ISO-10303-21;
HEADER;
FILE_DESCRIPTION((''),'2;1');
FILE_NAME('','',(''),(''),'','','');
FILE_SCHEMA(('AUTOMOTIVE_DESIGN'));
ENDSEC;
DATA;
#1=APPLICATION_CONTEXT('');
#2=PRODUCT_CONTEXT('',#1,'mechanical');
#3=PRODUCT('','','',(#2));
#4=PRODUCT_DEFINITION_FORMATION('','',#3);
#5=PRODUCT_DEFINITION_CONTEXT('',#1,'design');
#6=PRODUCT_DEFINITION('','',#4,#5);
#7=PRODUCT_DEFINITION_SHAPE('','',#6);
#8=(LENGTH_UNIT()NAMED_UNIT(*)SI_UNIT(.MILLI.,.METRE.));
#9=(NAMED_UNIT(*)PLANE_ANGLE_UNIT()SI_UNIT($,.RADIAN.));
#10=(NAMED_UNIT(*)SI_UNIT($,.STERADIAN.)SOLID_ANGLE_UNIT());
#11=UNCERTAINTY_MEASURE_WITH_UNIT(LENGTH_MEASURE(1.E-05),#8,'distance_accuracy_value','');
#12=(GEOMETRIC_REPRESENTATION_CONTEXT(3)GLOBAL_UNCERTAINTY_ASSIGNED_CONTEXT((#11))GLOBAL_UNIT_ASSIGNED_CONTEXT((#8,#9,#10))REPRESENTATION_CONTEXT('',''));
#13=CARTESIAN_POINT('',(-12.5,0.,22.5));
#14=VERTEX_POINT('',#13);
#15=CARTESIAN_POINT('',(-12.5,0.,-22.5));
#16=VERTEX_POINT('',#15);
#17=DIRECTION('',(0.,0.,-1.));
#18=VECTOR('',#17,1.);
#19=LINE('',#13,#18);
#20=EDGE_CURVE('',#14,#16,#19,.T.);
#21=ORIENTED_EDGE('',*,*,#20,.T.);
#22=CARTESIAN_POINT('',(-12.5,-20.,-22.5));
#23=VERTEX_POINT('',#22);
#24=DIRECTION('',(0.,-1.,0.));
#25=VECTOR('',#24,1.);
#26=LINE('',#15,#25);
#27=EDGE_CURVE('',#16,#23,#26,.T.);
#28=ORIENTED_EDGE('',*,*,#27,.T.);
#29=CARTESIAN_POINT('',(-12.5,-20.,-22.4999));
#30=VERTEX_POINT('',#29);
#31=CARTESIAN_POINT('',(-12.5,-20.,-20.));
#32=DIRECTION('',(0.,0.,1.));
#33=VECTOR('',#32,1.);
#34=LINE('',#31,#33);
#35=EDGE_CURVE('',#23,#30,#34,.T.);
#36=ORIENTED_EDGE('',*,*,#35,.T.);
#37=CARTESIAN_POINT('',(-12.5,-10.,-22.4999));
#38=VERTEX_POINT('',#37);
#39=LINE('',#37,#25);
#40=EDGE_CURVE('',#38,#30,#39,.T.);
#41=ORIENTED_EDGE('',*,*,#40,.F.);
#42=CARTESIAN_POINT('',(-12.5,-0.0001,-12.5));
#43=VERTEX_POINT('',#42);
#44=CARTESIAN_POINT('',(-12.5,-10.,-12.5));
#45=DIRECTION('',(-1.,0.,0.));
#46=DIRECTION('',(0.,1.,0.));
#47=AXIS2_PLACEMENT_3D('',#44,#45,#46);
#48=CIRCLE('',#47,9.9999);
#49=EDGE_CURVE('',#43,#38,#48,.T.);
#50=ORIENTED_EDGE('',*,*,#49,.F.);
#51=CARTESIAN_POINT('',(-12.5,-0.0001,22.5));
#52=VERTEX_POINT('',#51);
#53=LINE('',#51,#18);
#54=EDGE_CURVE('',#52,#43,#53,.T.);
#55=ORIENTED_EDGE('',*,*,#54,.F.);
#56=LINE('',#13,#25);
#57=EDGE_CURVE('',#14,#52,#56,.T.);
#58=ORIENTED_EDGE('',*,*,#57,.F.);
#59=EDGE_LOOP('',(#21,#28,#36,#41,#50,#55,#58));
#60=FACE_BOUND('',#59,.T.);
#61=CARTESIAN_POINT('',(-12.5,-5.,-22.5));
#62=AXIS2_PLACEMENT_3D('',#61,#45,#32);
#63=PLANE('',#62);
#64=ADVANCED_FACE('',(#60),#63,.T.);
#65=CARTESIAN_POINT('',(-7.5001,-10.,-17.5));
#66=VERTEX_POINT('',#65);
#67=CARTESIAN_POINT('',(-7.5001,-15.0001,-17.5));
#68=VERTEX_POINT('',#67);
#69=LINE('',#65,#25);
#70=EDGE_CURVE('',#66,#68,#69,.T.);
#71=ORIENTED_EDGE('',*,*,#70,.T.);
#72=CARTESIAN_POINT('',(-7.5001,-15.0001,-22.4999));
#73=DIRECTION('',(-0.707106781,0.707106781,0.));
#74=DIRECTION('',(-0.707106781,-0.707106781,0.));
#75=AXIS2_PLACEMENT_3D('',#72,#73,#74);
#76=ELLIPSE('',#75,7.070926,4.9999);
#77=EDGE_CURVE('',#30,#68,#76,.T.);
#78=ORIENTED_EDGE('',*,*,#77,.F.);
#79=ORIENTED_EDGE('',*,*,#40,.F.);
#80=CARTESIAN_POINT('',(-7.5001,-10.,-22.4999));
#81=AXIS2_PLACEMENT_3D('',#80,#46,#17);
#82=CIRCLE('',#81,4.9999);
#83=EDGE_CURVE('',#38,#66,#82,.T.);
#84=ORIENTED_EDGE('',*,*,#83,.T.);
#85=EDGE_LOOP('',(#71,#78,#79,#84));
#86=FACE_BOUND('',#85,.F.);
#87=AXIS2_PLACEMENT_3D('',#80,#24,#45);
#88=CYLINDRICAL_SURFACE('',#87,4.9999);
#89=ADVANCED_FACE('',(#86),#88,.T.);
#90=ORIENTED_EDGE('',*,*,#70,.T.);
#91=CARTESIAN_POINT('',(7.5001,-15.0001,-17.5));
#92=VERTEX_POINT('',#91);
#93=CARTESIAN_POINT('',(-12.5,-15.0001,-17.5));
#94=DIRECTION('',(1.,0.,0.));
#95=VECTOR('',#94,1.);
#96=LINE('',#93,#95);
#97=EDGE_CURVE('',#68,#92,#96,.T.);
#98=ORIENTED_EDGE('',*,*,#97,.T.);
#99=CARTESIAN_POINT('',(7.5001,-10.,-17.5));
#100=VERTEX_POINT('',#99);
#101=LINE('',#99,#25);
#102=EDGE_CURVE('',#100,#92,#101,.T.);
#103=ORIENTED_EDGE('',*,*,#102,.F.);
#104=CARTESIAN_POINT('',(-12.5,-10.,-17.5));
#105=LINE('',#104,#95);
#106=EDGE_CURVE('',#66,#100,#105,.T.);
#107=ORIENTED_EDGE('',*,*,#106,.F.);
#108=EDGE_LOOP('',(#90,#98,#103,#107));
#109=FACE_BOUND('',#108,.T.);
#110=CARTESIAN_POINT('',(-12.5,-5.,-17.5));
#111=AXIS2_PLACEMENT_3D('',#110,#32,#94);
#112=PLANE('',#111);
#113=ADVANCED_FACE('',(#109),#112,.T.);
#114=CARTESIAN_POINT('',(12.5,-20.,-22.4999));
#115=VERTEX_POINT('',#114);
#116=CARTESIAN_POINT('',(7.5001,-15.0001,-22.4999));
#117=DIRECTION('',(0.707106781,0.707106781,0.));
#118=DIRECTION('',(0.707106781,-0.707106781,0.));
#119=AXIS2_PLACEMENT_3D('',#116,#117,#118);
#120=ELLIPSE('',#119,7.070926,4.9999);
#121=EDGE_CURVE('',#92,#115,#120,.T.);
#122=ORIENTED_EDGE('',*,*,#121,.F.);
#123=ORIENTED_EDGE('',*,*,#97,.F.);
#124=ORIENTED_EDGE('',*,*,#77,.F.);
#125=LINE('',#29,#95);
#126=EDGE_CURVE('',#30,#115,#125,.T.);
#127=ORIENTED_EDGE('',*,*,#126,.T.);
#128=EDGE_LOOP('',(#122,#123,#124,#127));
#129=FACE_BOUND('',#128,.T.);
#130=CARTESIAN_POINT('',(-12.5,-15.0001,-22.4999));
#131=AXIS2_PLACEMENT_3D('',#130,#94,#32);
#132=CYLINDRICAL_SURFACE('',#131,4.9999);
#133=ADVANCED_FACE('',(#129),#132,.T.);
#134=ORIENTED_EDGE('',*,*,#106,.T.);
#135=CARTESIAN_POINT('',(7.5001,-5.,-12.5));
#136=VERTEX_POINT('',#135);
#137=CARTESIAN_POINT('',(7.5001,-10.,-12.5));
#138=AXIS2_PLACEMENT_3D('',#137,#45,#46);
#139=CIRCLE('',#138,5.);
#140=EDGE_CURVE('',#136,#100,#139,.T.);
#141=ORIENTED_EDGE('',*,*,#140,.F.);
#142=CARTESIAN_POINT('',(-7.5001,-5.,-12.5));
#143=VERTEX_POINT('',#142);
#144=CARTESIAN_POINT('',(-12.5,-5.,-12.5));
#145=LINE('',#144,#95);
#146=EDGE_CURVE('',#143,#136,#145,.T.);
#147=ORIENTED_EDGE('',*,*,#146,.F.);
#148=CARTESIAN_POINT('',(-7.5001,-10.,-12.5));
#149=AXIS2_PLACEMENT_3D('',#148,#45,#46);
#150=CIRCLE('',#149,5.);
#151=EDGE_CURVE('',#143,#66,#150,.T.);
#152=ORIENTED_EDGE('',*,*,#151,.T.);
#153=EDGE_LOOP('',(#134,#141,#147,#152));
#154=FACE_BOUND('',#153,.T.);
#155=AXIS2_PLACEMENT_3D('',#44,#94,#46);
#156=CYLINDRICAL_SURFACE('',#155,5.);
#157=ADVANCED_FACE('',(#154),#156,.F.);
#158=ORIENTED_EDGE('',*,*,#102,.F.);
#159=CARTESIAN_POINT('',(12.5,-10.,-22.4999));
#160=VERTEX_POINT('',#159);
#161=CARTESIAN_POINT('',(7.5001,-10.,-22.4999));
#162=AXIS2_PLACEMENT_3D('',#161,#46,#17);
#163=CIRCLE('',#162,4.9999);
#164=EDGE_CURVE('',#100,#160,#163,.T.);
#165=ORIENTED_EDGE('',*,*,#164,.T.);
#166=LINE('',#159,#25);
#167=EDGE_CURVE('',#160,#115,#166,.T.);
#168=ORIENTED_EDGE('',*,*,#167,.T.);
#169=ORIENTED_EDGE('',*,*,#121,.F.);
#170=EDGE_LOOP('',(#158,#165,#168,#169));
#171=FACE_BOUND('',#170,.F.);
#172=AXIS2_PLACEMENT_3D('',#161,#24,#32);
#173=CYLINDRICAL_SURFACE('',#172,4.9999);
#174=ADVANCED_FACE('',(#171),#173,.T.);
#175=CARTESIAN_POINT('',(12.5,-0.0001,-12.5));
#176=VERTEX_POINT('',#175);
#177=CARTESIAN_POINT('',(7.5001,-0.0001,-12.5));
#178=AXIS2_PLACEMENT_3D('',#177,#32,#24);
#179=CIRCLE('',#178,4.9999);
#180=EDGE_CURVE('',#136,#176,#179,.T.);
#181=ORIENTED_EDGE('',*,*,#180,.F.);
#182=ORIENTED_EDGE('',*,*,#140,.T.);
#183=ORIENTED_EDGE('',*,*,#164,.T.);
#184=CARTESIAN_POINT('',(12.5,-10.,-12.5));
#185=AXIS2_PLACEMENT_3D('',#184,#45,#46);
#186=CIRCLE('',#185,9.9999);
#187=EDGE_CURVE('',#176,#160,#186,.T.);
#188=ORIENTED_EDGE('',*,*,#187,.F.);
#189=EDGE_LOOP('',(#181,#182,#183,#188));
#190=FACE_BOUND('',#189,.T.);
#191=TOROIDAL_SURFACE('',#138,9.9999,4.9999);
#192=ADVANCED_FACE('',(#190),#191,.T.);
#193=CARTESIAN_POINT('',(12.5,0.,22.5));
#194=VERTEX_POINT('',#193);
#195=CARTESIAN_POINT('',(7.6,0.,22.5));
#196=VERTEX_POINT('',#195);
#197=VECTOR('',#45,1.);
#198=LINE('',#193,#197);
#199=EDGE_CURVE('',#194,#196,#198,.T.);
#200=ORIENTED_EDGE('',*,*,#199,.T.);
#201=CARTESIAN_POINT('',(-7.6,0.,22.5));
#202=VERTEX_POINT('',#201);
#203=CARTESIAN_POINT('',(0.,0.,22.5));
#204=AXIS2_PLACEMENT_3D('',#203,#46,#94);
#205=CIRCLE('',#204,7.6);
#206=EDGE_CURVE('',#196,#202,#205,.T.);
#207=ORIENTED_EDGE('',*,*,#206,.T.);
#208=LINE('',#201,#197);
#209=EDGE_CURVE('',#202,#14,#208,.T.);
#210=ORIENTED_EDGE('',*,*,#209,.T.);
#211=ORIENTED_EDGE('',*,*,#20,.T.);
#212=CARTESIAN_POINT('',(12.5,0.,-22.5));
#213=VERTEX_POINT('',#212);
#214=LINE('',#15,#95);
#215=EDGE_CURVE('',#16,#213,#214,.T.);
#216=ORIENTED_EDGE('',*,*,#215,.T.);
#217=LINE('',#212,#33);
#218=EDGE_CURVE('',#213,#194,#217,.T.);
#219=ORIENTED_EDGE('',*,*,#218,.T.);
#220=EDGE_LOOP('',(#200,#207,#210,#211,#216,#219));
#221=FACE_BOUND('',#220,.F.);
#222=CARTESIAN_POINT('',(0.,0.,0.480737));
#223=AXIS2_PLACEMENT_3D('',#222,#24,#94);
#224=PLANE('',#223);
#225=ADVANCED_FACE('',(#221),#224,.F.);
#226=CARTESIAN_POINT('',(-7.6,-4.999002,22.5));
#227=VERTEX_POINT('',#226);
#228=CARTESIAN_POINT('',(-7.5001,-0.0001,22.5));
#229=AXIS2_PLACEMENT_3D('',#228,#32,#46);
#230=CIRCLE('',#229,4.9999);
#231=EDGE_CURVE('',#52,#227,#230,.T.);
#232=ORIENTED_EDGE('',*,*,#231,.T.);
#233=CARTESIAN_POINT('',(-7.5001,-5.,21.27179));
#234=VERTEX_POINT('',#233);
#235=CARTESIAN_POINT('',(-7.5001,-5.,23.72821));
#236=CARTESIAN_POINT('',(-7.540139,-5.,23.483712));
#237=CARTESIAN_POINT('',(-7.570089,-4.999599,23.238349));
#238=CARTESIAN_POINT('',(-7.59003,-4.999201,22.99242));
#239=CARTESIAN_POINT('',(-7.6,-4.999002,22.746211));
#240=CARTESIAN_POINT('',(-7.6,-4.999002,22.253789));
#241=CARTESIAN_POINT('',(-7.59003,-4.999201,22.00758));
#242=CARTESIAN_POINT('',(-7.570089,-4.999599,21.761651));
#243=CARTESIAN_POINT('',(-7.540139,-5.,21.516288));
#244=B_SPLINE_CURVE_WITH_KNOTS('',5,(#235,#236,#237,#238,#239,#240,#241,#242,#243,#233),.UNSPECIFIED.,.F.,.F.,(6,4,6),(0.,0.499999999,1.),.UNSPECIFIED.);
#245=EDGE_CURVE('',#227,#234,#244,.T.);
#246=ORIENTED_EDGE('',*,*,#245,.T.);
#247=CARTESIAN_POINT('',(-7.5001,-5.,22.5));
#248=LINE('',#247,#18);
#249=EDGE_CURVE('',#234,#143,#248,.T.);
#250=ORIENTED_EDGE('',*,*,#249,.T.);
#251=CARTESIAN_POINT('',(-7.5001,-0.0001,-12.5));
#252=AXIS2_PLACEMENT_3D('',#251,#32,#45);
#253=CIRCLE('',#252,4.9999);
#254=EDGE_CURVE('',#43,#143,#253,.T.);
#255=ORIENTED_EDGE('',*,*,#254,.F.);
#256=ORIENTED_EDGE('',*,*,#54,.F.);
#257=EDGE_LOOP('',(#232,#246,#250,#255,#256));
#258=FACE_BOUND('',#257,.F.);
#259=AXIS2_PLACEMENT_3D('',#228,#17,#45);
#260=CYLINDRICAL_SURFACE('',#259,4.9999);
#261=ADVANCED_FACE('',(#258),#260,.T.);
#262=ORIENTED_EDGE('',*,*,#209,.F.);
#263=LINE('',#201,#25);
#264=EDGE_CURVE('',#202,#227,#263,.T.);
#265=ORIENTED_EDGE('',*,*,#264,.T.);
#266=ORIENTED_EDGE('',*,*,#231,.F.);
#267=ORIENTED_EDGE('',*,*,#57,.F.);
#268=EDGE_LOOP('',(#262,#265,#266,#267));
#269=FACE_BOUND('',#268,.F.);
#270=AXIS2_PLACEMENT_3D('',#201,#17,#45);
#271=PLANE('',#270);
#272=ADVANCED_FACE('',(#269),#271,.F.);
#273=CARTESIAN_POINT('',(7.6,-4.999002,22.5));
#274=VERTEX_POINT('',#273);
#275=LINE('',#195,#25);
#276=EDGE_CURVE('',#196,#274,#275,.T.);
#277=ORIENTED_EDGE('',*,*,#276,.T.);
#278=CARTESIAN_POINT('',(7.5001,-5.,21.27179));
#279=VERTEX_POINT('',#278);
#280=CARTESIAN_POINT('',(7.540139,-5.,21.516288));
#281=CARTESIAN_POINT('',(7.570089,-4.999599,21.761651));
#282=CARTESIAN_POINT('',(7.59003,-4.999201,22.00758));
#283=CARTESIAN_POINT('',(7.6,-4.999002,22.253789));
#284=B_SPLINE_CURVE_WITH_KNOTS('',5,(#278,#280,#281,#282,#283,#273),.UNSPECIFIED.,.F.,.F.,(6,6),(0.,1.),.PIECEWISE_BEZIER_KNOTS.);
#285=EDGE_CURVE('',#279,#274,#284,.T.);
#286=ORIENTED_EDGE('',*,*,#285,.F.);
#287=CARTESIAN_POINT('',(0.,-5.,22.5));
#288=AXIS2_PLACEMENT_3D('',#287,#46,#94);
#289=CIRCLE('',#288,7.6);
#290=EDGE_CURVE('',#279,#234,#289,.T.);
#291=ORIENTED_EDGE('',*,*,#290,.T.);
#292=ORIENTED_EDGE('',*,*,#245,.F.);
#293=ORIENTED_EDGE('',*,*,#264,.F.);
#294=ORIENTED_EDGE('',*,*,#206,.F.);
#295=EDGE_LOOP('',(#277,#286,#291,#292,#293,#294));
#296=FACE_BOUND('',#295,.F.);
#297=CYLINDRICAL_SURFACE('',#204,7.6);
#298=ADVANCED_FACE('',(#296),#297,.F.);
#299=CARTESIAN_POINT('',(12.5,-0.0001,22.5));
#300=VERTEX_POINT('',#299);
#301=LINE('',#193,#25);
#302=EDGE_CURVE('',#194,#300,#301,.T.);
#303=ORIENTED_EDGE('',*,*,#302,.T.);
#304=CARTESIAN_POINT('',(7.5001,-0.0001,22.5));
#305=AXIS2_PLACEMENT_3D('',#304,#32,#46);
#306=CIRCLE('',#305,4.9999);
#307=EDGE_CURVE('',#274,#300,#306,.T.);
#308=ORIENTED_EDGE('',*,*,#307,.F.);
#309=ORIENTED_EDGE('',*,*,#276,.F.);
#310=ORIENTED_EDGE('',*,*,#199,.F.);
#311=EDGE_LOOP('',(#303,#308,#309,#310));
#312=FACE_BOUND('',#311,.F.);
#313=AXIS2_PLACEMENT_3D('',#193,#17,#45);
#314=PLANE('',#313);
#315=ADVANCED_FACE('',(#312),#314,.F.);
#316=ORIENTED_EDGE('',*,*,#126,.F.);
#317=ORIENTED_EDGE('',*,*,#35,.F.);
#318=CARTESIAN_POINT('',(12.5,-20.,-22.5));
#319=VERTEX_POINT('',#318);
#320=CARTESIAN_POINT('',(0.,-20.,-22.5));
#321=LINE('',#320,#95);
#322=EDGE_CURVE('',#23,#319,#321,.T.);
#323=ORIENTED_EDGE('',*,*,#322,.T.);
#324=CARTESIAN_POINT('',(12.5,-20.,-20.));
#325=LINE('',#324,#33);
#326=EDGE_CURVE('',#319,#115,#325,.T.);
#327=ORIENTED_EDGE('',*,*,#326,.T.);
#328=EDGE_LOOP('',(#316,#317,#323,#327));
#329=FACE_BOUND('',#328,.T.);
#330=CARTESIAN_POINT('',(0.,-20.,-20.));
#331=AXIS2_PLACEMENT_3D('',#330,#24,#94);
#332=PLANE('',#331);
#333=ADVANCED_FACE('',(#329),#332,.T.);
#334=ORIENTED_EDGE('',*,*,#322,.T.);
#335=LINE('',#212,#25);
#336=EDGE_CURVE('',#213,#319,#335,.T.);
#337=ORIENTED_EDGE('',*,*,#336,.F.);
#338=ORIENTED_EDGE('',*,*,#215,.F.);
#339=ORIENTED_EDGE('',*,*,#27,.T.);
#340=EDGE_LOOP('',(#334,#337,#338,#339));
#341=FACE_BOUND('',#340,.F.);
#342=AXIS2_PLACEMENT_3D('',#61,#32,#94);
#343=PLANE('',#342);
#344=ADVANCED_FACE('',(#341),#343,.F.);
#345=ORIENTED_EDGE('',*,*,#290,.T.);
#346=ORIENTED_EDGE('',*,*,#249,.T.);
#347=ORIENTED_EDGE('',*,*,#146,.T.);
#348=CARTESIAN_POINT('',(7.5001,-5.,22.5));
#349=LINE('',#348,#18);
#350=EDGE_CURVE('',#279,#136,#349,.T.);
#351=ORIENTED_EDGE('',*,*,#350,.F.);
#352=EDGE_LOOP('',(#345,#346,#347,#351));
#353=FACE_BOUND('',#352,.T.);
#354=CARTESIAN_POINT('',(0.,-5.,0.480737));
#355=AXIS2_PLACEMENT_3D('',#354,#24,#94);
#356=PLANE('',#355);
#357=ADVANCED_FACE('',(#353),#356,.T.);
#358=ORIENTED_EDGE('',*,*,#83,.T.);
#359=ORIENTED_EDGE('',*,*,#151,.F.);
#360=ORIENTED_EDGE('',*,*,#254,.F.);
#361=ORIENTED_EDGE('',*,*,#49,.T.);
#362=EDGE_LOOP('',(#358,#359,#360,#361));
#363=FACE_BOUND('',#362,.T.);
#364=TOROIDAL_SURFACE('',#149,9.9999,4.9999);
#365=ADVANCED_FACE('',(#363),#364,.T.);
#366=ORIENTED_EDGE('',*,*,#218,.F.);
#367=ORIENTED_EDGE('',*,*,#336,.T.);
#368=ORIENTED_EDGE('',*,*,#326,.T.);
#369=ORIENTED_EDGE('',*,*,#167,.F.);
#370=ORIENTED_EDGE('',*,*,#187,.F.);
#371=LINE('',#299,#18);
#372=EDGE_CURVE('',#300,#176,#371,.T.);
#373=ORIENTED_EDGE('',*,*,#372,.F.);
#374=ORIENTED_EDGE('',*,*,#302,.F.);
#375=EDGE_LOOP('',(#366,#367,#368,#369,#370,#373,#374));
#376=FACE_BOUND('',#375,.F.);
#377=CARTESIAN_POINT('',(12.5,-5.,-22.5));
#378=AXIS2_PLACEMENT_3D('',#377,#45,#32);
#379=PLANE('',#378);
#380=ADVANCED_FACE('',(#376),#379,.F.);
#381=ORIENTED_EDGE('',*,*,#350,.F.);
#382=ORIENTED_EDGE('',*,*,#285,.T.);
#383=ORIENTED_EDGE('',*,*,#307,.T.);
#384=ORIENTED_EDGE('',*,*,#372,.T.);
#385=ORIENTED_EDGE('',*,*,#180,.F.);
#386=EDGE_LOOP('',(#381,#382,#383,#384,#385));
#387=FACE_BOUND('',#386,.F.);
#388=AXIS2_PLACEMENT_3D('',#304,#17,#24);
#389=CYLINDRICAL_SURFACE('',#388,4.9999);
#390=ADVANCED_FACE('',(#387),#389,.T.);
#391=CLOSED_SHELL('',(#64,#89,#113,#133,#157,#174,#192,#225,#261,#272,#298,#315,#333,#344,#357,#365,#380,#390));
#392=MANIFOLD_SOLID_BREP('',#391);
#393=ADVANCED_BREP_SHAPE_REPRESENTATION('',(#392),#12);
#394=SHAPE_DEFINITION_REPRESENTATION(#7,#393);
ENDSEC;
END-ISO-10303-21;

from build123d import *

# Parameters (mm, degrees)
F1_DEPTH = 5
F2_W     = 25
F2_H     = 5
F3_DEPTH = 15
F4_F1_R  = 5
F4_F2_R  = 4.9999


# Not quite as in the source:
# - a fillet or chamfer is up to 0.001 mm smaller than in the source, because OpenCascade refuses the exact size


with BuildPart() as f1:
    # F0 (on Front) → F1 (new body)
    with BuildSketch(Plane.XZ):
        with BuildLine():
            Line((-12.5, -22.5), (12.5, -22.5))
            Line((12.5, -22.5), (12.5, 22.5))
            Line((12.5, 22.5), (7.6, 22.5))
            ThreePointArc((7.6, 22.5), (0, 14.9), (-7.6, 22.5))
            Line((-7.6, 22.5), (-12.5, 22.5))
            Line((-12.5, 22.5), (-12.5, -22.5))
        make_face()
    extrude(amount=F1_DEPTH)

    # F2 (on face) → F3 (join)
    with BuildSketch(Plane.XZ.offset(5)):
        with Locations((0, -20)):
            Rectangle(F2_W, F2_H)
    extrude(amount=F3_DEPTH)

    # F4: fillet of radius 5 on 4 edges, made by hand

    # F4_f1
    f4_f1_edges = [f1.edges().sort_by_distance(p)[0] for p in [
        (0, -5, -17.5),
    ]]
    fillet(f4_f1_edges, radius=F4_F1_R)

    # F4_f2 (radius 5 in the source; OpenCascade refuses exactly that, so slightly less here)
    f4_f2_edges = [f1.edges().sort_by_distance(p)[0] for p in [
        (12.5, -15, -17.5),
        (-12.5, -15, -17.5),
        (0, -20, -17.5),
        (-12.5, -6.4644660941, -16.0355339059),
        (12.5, -6.4644660941, -16.0355339059),
    ]]
    fillet(f4_f2_edges, radius=F4_F2_R)


solid = f1.part
